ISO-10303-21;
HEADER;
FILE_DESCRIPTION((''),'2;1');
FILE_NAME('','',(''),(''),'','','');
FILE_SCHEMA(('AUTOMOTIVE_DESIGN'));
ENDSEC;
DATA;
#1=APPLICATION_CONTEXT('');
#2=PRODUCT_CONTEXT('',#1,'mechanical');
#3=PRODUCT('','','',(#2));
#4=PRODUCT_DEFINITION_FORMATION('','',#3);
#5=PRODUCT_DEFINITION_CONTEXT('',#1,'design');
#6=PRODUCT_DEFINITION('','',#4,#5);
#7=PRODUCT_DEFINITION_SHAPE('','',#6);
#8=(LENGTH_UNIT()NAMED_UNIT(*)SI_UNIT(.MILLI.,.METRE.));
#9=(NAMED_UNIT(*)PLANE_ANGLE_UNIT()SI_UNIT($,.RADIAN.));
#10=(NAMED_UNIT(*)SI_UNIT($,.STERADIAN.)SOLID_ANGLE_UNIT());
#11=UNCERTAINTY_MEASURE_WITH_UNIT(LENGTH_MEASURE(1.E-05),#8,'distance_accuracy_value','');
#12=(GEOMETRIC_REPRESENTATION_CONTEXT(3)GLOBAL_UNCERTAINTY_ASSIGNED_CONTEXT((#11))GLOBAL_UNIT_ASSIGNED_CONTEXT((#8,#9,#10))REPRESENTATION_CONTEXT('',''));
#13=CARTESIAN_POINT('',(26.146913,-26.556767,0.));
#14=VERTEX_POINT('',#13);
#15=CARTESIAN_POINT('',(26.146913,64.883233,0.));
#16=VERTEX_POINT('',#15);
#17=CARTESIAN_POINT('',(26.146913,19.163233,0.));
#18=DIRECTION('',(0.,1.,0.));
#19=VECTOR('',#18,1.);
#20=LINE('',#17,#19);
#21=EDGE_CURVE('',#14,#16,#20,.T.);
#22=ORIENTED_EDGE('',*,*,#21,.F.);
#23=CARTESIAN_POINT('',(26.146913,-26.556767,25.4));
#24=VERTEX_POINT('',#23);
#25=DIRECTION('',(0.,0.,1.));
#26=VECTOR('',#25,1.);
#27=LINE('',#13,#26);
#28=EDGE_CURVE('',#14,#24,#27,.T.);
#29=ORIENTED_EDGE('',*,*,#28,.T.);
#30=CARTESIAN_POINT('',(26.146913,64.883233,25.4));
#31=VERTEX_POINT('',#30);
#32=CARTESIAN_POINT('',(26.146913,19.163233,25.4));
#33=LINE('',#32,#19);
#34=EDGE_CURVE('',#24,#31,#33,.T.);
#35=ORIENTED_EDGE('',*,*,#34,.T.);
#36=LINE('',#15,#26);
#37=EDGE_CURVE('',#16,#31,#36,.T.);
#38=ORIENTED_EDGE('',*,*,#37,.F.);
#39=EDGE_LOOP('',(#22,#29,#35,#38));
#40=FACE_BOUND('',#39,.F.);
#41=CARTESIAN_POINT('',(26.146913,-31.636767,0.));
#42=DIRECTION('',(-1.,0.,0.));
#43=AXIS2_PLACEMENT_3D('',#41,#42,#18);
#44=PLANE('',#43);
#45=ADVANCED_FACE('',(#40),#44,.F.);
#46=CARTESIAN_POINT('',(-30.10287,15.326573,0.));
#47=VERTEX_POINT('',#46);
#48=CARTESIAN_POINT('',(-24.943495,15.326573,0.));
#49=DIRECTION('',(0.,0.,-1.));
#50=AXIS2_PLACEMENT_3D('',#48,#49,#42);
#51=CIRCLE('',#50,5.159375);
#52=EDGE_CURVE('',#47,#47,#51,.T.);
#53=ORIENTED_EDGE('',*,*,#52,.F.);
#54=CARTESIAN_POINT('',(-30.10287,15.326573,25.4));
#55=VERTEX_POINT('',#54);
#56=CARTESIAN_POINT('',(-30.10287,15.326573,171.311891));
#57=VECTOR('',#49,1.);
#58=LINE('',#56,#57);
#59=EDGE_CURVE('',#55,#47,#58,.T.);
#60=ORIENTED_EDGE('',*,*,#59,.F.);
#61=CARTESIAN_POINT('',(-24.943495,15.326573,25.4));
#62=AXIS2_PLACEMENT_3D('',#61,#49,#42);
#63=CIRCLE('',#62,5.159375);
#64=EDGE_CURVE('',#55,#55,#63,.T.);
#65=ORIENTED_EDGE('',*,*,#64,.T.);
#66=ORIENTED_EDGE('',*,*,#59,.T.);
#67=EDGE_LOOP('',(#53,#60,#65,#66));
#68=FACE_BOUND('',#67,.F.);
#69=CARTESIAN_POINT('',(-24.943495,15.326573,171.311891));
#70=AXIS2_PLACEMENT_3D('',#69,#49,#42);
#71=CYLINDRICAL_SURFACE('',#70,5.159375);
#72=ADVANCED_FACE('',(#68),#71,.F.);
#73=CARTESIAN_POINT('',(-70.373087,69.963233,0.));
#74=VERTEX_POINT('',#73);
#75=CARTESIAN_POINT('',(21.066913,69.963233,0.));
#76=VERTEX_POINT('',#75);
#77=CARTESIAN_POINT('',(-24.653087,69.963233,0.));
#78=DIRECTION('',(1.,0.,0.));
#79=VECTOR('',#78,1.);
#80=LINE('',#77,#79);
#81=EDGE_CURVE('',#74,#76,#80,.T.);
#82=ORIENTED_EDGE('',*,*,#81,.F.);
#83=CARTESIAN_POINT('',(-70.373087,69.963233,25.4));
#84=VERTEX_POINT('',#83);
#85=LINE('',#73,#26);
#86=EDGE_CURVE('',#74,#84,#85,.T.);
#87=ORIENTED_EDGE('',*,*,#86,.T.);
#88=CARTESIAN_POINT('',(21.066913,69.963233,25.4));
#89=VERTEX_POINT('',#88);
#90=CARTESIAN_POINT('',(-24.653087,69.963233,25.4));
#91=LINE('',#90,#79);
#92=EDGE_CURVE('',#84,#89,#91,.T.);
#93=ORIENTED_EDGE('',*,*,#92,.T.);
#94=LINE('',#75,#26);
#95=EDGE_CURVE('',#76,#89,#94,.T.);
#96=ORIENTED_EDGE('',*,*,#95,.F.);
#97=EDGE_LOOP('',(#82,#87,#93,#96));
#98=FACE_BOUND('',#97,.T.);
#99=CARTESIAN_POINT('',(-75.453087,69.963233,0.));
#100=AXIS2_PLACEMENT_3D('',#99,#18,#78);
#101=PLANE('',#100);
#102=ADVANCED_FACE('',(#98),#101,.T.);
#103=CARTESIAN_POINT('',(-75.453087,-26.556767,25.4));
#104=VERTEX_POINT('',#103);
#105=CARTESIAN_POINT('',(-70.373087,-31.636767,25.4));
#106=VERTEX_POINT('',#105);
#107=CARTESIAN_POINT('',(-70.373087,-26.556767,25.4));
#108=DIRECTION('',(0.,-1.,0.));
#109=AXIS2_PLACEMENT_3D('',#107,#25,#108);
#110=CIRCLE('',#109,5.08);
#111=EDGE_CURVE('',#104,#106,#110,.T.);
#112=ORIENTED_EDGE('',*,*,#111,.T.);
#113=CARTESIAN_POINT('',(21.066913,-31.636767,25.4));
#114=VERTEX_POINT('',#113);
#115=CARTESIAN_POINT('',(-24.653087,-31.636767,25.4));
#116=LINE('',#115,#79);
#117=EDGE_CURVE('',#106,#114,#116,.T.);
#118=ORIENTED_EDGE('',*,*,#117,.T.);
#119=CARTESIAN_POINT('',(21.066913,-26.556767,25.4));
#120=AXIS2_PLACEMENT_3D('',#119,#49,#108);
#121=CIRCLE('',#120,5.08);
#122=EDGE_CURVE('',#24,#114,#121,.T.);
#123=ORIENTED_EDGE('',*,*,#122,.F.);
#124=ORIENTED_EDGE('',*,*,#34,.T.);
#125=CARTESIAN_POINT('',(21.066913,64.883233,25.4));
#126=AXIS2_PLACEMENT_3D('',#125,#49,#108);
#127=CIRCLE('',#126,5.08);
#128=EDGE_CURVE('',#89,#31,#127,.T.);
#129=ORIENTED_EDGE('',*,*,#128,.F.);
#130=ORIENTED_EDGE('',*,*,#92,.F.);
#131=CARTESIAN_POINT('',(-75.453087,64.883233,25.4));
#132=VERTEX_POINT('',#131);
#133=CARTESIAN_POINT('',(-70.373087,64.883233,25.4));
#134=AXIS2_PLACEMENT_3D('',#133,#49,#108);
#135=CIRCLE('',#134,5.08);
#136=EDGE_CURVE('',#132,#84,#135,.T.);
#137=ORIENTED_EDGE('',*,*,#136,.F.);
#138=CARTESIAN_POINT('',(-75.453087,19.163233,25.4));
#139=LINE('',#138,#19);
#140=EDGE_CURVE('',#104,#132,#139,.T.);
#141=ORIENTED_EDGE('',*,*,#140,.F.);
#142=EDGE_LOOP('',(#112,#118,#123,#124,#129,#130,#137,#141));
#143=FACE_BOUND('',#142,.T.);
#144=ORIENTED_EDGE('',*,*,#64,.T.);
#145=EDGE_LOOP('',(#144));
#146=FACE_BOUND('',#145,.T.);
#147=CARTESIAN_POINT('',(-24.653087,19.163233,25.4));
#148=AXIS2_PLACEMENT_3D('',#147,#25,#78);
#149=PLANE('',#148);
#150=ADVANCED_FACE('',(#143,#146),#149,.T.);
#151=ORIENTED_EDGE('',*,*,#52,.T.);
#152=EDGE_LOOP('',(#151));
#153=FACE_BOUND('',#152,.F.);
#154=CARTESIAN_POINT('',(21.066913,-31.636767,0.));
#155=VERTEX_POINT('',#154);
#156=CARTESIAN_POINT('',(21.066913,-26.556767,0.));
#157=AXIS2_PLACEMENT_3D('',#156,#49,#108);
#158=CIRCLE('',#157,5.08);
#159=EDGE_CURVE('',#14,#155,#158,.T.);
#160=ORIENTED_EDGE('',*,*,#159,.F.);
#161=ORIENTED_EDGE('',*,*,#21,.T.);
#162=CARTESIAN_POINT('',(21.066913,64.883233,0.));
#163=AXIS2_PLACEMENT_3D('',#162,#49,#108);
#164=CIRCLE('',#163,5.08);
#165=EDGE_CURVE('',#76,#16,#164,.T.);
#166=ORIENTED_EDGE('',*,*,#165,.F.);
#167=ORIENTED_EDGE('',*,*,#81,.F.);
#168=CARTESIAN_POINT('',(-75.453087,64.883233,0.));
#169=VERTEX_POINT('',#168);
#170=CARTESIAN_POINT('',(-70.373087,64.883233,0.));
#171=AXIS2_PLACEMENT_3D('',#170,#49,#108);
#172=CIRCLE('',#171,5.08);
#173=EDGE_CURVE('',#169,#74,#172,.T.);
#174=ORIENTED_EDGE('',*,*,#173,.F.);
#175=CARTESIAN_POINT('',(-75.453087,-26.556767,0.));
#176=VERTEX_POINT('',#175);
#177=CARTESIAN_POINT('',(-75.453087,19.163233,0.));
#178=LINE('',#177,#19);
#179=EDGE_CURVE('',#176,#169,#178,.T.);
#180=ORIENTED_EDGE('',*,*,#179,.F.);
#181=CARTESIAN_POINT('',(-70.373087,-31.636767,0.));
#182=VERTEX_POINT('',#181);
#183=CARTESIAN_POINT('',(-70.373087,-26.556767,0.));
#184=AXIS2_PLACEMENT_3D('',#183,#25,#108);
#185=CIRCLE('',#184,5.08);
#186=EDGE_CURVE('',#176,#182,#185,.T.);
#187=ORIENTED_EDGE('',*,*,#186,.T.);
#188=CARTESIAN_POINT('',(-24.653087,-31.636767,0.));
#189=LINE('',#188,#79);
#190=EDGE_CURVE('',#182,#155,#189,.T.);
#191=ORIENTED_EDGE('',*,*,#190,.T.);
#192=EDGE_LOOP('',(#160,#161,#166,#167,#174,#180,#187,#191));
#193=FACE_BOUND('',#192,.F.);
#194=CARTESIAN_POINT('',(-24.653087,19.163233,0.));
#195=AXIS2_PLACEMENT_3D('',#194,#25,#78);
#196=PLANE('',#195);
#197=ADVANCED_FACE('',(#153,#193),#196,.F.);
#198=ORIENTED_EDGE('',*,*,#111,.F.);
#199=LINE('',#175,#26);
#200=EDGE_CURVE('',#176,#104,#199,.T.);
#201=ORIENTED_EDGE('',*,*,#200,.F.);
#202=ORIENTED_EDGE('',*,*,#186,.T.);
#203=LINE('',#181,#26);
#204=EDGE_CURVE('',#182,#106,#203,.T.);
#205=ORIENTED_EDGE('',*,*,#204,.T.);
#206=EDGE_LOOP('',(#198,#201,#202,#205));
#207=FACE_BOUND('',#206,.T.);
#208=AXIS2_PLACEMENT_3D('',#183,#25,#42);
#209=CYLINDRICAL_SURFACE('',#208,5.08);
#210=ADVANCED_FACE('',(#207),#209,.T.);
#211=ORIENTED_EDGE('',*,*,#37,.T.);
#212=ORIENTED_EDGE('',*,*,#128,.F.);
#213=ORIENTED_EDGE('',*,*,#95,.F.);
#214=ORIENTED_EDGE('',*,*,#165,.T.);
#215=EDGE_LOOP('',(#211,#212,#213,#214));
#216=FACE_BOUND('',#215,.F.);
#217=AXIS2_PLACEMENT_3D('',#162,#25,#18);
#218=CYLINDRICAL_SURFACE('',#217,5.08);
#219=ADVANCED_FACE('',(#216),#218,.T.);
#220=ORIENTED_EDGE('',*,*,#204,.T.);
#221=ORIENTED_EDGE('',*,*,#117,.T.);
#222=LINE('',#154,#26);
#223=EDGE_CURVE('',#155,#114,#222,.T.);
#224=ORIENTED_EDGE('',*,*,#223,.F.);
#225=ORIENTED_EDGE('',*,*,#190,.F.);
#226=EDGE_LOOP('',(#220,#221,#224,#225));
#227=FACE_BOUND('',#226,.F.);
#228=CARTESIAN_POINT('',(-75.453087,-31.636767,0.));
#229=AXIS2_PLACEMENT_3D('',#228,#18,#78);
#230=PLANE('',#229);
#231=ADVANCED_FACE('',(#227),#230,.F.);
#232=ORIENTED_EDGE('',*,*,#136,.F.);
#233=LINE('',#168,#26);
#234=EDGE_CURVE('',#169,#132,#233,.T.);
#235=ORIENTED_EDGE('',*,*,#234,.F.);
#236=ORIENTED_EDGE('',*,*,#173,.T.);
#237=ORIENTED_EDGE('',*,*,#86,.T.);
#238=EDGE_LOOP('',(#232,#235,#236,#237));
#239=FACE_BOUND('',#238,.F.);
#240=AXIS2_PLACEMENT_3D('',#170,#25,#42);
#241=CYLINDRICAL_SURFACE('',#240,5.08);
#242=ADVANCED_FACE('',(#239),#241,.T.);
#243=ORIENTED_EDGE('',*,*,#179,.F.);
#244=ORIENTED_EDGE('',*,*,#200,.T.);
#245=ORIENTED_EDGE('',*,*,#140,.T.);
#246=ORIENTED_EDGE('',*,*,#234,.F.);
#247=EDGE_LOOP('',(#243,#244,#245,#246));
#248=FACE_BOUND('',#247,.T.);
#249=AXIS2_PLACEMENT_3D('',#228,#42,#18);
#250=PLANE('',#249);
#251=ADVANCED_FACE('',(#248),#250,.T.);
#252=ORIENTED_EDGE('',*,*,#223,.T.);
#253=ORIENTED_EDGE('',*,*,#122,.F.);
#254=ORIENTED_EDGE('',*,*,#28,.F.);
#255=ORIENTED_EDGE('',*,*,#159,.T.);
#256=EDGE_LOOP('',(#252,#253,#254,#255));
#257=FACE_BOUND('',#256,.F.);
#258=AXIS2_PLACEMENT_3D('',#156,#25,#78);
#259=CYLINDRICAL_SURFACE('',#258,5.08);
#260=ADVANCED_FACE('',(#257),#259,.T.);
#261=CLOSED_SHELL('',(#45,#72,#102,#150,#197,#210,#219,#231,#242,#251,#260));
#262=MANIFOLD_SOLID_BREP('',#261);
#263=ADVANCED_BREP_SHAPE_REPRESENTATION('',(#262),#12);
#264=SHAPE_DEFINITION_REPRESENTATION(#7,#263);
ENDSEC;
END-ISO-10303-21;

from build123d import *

# Parameters (mm, degrees)
F0_W     = 101.6
F0_H     = 101.6
F1_DEPTH = 25.4
F2_R     = 5.08
F3_R     = 5.08
F4_R     = 5.08
F5_R     = 5.08
F7_D     = 10.31875


# Not quite as in the source:
# - a length typed as a fraction of an inch, garbled in the dataset ("3 / 203.2 mm" for 3/8 in), is restored


with BuildPart() as f1:
    # F0 (on Top) → F1 (new body)
    with BuildSketch(Plane.XY):
        with Locations((-24.6530866301, 19.163233228)):
            Rectangle(F0_W, F0_H)
    extrude(amount=F1_DEPTH)

    # F2
    f2_edges = [f1.edges().sort_by_distance(p)[0] for p in [
        (-75.453087, 69.963233, 12.7),
    ]]
    fillet(f2_edges, radius=F2_R)

    # F3
    f3_edges = [f1.edges().sort_by_distance(p)[0] for p in [
        (-75.453087, -31.636767, 12.7),
    ]]
    fillet(f3_edges, radius=F3_R)

    # F4
    f4_edges = [f1.edges().sort_by_distance(p)[0] for p in [
        (26.146913, 69.963233, 12.7),
    ]]
    fillet(f4_edges, radius=F4_R)

    # F5
    f5_edges = [f1.edges().sort_by_distance(p)[0] for p in [
        (26.146913, -31.636767, 12.7),
    ]]
    fillet(f5_edges, radius=F5_R)

    # F7 (through all)
    with Locations(Plane.XY.offset(25.4)):
        with Locations((-24.9434951693, 15.3265725821)):
            Hole(F7_D / 2)


solid = f1.part
